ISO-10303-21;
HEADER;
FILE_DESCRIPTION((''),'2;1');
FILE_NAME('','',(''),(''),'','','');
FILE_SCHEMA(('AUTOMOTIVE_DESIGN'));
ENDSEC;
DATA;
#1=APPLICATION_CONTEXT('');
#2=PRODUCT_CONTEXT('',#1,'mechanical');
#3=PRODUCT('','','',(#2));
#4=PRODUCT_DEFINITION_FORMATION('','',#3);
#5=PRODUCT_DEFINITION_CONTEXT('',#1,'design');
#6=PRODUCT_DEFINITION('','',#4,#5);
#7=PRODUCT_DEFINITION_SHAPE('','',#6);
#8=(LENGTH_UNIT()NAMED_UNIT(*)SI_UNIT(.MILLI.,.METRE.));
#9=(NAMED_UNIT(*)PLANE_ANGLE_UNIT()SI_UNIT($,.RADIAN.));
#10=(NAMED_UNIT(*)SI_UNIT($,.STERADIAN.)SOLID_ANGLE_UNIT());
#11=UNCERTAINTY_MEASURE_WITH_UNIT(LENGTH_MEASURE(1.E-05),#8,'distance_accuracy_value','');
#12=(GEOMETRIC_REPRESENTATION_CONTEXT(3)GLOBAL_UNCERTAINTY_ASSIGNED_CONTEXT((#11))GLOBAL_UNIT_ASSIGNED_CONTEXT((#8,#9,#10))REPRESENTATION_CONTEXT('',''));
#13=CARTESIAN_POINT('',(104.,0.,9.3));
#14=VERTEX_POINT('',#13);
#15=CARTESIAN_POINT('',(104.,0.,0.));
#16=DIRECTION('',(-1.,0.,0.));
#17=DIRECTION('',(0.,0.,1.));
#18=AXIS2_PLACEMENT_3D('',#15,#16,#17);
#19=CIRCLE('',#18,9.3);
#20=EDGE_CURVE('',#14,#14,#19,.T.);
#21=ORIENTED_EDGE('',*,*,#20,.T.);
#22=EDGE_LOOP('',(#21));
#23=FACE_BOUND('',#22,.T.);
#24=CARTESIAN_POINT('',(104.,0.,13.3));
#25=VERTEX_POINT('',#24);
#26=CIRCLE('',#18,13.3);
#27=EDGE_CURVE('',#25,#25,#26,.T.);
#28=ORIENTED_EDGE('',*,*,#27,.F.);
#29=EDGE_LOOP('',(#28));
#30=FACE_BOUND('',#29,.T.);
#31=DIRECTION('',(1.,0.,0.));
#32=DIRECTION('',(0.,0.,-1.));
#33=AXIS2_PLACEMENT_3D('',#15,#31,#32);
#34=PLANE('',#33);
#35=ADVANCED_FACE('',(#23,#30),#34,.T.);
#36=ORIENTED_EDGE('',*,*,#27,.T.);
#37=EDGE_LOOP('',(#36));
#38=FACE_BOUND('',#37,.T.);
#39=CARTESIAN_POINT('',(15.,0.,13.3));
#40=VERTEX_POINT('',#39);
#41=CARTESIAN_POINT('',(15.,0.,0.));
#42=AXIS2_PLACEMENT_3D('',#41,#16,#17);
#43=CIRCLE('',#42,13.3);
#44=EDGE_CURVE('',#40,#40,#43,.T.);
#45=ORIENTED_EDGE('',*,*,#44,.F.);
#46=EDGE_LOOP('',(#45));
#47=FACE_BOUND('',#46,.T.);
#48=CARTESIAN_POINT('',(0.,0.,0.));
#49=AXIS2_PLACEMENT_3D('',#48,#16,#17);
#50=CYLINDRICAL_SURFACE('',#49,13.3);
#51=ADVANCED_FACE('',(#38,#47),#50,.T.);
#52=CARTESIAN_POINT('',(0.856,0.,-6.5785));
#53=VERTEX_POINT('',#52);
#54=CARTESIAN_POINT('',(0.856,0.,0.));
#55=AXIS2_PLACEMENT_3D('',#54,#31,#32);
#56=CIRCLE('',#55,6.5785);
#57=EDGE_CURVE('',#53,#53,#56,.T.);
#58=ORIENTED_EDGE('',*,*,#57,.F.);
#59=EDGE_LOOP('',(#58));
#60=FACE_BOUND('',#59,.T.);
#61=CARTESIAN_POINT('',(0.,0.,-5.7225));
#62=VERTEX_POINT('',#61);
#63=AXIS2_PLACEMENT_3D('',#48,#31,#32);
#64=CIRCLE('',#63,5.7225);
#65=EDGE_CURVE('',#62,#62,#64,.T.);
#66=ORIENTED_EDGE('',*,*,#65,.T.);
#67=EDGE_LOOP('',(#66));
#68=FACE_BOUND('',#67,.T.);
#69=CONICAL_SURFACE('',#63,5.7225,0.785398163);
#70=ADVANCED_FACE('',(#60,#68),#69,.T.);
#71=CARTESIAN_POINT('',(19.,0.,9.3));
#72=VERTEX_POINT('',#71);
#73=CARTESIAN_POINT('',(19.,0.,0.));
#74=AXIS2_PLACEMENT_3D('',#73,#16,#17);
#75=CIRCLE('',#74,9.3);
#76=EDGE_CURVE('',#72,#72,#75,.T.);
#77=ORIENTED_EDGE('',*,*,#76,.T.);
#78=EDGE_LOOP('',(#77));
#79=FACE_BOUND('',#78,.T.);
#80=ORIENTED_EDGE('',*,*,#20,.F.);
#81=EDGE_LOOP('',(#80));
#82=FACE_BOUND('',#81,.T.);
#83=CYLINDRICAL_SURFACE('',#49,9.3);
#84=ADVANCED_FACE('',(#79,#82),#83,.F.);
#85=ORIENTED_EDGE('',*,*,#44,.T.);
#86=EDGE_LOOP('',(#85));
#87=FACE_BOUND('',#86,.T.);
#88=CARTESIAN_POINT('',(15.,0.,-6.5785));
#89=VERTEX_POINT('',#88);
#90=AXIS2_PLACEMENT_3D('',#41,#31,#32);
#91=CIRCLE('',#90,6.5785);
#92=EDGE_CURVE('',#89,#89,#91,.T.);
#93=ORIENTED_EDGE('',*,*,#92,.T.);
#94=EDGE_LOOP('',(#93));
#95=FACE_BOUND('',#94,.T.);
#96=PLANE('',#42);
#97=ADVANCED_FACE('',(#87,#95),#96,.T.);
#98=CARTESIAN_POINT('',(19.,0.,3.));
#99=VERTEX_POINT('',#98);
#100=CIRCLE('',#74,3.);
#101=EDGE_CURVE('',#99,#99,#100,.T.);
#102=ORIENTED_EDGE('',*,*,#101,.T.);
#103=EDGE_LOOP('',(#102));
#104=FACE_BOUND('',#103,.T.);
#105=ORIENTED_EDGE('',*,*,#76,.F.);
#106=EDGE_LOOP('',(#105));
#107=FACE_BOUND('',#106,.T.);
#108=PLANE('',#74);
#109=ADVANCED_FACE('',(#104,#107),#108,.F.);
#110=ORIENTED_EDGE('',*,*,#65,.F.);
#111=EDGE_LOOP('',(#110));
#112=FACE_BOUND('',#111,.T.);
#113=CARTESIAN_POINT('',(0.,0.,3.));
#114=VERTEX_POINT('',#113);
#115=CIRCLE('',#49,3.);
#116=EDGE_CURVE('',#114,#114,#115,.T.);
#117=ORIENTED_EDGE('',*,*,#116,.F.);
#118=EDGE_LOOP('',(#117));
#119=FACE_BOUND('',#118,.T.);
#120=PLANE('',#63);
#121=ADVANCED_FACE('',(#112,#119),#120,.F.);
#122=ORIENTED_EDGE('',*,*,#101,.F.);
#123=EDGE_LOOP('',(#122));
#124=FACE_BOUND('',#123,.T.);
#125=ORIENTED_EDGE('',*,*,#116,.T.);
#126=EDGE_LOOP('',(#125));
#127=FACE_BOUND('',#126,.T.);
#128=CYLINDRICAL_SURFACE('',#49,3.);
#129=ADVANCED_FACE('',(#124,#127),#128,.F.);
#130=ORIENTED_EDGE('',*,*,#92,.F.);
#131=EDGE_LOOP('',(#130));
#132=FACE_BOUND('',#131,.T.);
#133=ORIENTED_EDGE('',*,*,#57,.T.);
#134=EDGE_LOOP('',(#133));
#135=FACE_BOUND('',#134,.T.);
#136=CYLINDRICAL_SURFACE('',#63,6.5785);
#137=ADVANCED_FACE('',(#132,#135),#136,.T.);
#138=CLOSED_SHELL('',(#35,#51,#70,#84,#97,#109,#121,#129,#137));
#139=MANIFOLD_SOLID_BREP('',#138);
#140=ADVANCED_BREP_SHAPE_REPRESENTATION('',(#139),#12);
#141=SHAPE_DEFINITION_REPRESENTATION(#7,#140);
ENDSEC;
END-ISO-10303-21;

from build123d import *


# Read off the part's stored shape, not the designer's step: G1/4 Straight Pipe Tapped Thread Stud2
with BuildPart() as part:
    # Sketch1 → Revolve1 (revolve)
    with BuildSketch(Plane.XY, mode=Mode.PRIVATE) as revolve1_sk:
        Polygon((15, -13.3), (104, -13.3), (104, -9.3), (19, -9.3), (19, -3), (0, -3), (0, -7), (15, -7), align=None)
    revolve(revolve1_sk.sketch.rotate(Axis((0, 0, 0), (1, 0, 0)), 270), axis=Axis((0, 0, 0), (1, 0, 0)))

    # G1/4 Straight Pipe Tapped Thread Stud2 o → G1/4 Straight Pipe Tapped Thread Stud2 (revolve, cut)
    with BuildSketch(Plane.YX):
        Polygon((5.7225, 0), (7, 0), (7, 15), (6.5785, 15), (6.5785, 0.856), align=None)
    revolve(axis=Axis((0, 0, 0), (1, 0, 0)), mode=Mode.SUBTRACT)


solid = part.part
